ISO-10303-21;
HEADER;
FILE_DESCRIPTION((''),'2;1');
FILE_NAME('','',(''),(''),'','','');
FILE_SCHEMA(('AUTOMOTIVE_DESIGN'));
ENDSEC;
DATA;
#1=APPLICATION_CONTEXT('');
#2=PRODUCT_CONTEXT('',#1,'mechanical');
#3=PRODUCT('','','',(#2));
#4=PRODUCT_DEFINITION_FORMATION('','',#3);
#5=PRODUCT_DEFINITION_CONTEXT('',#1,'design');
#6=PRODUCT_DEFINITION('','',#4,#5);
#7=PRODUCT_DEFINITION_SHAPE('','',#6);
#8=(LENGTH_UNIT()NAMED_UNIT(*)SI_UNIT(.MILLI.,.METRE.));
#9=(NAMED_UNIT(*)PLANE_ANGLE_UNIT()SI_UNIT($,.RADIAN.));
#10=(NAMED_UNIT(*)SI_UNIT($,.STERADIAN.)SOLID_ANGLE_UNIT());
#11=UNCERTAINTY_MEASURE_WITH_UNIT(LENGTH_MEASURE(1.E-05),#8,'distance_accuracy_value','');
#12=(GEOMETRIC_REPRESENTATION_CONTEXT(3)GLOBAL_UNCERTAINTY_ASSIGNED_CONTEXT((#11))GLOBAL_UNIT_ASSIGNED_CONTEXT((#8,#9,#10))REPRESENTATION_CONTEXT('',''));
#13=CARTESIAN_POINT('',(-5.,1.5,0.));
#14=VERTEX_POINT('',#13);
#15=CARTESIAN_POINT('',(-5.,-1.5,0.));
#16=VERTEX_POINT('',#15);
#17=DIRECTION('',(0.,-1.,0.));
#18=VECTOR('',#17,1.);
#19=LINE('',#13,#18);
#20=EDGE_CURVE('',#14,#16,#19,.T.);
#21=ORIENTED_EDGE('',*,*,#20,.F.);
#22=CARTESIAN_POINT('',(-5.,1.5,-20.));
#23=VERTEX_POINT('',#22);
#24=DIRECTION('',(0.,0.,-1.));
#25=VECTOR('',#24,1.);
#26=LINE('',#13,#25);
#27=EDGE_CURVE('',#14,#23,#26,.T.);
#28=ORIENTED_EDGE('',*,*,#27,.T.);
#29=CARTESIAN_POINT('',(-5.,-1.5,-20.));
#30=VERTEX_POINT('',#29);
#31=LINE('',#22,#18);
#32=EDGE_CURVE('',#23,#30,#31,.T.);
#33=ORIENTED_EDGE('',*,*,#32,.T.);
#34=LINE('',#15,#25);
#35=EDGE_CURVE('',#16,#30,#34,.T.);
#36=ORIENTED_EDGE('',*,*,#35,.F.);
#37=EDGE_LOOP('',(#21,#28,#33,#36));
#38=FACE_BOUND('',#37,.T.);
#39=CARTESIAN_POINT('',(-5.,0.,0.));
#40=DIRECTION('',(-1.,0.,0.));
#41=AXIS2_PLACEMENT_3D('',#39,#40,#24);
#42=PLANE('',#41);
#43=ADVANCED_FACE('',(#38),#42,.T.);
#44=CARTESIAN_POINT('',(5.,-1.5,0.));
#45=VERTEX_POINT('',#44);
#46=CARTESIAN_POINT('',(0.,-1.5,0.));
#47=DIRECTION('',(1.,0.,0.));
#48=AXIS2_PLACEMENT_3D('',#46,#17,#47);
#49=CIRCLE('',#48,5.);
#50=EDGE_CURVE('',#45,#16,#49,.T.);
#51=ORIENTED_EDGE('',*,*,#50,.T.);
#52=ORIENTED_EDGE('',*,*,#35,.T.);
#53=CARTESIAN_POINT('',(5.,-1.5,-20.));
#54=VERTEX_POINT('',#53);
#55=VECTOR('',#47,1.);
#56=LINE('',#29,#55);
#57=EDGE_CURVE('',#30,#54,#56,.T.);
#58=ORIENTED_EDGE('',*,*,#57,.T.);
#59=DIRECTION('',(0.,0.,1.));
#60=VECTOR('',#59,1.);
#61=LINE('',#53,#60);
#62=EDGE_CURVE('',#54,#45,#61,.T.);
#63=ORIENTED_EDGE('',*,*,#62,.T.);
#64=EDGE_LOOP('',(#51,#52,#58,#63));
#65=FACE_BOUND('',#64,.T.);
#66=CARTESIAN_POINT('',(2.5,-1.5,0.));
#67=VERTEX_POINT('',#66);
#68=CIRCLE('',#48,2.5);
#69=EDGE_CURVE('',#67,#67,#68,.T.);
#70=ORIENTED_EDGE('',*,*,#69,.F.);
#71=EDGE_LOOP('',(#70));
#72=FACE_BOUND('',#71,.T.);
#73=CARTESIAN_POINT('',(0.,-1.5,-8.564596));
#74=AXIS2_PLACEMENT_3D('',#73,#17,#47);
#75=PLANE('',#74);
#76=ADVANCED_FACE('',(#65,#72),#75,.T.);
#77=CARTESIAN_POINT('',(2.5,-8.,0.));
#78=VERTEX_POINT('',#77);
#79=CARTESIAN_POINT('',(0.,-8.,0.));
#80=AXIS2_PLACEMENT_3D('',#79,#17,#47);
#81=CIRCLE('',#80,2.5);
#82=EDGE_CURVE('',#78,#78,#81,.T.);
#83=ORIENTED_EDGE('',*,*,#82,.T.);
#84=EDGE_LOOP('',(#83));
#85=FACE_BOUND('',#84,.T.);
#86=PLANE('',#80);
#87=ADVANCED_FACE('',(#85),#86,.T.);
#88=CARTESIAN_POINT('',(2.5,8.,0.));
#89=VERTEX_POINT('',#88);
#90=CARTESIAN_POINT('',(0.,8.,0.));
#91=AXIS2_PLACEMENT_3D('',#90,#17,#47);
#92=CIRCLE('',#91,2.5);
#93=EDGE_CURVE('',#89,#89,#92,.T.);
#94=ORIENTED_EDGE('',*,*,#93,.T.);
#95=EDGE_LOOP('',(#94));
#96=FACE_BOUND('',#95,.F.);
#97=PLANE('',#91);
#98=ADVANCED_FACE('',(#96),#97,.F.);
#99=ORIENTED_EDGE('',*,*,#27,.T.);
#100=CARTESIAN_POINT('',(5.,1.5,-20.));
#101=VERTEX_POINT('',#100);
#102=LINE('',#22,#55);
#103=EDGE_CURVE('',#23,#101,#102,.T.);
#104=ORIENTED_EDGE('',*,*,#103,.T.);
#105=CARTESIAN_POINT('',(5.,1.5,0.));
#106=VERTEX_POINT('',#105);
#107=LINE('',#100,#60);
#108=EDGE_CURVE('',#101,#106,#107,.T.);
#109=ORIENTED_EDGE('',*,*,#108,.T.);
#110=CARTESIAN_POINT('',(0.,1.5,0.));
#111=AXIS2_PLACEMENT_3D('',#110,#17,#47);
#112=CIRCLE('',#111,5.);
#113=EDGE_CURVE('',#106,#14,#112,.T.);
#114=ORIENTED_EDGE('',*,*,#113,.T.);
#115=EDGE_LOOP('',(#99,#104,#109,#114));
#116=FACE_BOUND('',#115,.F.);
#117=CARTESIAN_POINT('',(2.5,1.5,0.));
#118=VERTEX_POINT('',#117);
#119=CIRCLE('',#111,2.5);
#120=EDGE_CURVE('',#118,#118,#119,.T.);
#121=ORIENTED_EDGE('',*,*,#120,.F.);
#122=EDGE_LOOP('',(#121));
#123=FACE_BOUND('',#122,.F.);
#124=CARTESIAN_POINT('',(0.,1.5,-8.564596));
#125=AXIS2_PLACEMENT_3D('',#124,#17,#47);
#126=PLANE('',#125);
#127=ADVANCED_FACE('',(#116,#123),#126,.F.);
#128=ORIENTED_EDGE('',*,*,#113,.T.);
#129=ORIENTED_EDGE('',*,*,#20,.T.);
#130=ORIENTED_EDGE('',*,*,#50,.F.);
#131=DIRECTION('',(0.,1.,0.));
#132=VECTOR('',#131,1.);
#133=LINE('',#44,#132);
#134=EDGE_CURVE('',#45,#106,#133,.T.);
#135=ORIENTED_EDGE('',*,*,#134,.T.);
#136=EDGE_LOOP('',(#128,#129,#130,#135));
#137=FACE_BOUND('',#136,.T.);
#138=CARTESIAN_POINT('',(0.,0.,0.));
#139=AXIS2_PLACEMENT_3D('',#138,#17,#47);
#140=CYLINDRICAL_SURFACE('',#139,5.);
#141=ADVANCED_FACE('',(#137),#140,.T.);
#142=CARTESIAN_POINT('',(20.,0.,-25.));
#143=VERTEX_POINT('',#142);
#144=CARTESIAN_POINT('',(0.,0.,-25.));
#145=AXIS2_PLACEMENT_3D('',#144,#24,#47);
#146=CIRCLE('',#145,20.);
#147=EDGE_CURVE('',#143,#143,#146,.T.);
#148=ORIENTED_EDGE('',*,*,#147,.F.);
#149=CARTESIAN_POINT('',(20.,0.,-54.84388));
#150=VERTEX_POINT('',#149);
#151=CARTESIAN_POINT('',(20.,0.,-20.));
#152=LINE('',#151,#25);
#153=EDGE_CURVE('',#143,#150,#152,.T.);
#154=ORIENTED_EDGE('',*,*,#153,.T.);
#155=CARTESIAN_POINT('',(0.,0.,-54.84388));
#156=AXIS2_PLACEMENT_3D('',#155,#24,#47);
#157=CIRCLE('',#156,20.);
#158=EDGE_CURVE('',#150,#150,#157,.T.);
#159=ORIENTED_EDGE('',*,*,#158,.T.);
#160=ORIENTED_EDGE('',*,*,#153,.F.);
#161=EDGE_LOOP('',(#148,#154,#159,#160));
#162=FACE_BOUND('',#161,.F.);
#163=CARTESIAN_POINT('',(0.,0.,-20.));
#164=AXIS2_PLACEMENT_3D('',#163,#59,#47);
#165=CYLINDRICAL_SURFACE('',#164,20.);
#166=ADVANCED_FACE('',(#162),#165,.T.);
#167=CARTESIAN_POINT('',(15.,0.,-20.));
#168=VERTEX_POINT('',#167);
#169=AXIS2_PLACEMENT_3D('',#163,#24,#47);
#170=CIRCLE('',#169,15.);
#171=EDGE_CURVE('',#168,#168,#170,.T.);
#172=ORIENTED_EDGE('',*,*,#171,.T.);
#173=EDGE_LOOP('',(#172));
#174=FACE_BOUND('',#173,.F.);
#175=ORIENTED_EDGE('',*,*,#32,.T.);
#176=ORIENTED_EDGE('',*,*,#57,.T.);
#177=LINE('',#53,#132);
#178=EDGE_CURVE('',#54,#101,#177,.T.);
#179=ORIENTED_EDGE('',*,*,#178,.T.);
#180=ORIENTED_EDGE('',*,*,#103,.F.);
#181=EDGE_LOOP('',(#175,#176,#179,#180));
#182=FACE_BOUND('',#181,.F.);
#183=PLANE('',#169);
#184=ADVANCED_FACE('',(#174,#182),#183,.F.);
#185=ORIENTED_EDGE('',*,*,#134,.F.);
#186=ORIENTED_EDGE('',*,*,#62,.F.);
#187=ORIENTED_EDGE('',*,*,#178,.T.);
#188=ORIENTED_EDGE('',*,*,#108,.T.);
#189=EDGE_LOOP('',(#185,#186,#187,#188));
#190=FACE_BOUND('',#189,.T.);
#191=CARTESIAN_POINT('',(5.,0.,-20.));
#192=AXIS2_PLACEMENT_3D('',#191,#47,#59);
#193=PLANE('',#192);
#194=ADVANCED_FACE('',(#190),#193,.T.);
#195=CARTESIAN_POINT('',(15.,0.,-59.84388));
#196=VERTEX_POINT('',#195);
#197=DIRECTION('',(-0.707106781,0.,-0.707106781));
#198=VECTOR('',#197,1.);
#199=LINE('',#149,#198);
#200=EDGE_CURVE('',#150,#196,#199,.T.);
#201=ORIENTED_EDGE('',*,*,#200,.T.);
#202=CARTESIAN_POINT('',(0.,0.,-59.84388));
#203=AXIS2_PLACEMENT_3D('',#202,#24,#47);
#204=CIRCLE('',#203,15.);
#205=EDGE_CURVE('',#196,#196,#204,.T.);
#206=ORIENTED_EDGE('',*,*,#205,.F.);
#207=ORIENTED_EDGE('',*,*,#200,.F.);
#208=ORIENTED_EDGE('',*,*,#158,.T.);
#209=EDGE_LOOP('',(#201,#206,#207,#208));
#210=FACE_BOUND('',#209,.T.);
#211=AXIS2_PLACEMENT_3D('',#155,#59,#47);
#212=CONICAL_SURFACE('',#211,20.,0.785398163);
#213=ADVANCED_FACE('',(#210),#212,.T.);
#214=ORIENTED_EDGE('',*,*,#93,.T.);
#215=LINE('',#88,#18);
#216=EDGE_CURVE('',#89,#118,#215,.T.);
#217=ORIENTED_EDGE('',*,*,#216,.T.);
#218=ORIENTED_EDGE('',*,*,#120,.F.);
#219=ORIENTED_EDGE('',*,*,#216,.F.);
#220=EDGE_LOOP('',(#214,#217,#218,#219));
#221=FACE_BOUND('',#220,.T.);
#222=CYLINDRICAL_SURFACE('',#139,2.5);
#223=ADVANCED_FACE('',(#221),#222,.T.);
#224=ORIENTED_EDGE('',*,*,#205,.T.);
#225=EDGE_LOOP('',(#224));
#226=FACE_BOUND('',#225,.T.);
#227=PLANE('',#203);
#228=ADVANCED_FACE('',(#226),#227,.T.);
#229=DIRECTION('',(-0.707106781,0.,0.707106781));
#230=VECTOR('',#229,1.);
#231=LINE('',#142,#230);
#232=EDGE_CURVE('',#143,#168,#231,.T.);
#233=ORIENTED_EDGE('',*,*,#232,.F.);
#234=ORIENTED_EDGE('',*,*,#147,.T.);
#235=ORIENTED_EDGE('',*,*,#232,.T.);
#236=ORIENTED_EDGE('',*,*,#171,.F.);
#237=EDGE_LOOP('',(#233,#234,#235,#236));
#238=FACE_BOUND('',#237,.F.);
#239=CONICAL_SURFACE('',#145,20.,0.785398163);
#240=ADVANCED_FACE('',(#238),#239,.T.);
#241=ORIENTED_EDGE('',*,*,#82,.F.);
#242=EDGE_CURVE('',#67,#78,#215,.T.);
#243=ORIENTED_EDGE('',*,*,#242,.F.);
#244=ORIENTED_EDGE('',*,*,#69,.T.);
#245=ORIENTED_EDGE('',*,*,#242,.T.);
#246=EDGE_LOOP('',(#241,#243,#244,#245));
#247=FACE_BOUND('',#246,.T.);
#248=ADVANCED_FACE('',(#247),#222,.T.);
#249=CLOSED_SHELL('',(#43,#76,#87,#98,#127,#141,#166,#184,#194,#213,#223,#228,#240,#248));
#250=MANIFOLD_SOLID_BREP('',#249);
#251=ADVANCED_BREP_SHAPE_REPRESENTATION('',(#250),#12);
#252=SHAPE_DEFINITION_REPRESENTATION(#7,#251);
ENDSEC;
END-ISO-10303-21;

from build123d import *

# Parameters (mm, degrees)
F0_R     = 2.5
F1_DEPTH = 8
F3_DEPTH = 1.5
F4_R     = 20
F5_DEPTH = 39.84388
F6_SIZE  = 5


with BuildPart() as f1:
    # F0 (on Front) → F1 (new body, symmetric)
    with BuildSketch(Plane.XZ):
        Circle(F0_R)
    extrude(amount=F1_DEPTH, both=True)

    # F2 (on Front) → F3 (join, symmetric)
    with BuildSketch(Plane.XZ):
        with BuildLine():
            ThreePointArc((5, 0), (0, 5), (-5, 0))
            Line((-5, 0), (-5, -20))
            Line((-5, -20), (5, -20))
            Line((5, -20), (5, 0))
        make_face()
    extrude(amount=F3_DEPTH, both=True)

    # F4 (on face) → F5 (join)
    with BuildSketch(Plane(origin=(0, 0, -20), x_dir=(1, 0, 0), z_dir=(0, 0, -1))):
        Circle(F4_R)
    extrude(amount=F5_DEPTH)

    # F6
    f6_edges = [f1.edges().sort_by_distance(p)[0] for p in [
        (-20, 0, -20),
        (-20, 0, -59.84388),
    ]]
    chamfer(f6_edges, length=F6_SIZE)


solid = f1.part
